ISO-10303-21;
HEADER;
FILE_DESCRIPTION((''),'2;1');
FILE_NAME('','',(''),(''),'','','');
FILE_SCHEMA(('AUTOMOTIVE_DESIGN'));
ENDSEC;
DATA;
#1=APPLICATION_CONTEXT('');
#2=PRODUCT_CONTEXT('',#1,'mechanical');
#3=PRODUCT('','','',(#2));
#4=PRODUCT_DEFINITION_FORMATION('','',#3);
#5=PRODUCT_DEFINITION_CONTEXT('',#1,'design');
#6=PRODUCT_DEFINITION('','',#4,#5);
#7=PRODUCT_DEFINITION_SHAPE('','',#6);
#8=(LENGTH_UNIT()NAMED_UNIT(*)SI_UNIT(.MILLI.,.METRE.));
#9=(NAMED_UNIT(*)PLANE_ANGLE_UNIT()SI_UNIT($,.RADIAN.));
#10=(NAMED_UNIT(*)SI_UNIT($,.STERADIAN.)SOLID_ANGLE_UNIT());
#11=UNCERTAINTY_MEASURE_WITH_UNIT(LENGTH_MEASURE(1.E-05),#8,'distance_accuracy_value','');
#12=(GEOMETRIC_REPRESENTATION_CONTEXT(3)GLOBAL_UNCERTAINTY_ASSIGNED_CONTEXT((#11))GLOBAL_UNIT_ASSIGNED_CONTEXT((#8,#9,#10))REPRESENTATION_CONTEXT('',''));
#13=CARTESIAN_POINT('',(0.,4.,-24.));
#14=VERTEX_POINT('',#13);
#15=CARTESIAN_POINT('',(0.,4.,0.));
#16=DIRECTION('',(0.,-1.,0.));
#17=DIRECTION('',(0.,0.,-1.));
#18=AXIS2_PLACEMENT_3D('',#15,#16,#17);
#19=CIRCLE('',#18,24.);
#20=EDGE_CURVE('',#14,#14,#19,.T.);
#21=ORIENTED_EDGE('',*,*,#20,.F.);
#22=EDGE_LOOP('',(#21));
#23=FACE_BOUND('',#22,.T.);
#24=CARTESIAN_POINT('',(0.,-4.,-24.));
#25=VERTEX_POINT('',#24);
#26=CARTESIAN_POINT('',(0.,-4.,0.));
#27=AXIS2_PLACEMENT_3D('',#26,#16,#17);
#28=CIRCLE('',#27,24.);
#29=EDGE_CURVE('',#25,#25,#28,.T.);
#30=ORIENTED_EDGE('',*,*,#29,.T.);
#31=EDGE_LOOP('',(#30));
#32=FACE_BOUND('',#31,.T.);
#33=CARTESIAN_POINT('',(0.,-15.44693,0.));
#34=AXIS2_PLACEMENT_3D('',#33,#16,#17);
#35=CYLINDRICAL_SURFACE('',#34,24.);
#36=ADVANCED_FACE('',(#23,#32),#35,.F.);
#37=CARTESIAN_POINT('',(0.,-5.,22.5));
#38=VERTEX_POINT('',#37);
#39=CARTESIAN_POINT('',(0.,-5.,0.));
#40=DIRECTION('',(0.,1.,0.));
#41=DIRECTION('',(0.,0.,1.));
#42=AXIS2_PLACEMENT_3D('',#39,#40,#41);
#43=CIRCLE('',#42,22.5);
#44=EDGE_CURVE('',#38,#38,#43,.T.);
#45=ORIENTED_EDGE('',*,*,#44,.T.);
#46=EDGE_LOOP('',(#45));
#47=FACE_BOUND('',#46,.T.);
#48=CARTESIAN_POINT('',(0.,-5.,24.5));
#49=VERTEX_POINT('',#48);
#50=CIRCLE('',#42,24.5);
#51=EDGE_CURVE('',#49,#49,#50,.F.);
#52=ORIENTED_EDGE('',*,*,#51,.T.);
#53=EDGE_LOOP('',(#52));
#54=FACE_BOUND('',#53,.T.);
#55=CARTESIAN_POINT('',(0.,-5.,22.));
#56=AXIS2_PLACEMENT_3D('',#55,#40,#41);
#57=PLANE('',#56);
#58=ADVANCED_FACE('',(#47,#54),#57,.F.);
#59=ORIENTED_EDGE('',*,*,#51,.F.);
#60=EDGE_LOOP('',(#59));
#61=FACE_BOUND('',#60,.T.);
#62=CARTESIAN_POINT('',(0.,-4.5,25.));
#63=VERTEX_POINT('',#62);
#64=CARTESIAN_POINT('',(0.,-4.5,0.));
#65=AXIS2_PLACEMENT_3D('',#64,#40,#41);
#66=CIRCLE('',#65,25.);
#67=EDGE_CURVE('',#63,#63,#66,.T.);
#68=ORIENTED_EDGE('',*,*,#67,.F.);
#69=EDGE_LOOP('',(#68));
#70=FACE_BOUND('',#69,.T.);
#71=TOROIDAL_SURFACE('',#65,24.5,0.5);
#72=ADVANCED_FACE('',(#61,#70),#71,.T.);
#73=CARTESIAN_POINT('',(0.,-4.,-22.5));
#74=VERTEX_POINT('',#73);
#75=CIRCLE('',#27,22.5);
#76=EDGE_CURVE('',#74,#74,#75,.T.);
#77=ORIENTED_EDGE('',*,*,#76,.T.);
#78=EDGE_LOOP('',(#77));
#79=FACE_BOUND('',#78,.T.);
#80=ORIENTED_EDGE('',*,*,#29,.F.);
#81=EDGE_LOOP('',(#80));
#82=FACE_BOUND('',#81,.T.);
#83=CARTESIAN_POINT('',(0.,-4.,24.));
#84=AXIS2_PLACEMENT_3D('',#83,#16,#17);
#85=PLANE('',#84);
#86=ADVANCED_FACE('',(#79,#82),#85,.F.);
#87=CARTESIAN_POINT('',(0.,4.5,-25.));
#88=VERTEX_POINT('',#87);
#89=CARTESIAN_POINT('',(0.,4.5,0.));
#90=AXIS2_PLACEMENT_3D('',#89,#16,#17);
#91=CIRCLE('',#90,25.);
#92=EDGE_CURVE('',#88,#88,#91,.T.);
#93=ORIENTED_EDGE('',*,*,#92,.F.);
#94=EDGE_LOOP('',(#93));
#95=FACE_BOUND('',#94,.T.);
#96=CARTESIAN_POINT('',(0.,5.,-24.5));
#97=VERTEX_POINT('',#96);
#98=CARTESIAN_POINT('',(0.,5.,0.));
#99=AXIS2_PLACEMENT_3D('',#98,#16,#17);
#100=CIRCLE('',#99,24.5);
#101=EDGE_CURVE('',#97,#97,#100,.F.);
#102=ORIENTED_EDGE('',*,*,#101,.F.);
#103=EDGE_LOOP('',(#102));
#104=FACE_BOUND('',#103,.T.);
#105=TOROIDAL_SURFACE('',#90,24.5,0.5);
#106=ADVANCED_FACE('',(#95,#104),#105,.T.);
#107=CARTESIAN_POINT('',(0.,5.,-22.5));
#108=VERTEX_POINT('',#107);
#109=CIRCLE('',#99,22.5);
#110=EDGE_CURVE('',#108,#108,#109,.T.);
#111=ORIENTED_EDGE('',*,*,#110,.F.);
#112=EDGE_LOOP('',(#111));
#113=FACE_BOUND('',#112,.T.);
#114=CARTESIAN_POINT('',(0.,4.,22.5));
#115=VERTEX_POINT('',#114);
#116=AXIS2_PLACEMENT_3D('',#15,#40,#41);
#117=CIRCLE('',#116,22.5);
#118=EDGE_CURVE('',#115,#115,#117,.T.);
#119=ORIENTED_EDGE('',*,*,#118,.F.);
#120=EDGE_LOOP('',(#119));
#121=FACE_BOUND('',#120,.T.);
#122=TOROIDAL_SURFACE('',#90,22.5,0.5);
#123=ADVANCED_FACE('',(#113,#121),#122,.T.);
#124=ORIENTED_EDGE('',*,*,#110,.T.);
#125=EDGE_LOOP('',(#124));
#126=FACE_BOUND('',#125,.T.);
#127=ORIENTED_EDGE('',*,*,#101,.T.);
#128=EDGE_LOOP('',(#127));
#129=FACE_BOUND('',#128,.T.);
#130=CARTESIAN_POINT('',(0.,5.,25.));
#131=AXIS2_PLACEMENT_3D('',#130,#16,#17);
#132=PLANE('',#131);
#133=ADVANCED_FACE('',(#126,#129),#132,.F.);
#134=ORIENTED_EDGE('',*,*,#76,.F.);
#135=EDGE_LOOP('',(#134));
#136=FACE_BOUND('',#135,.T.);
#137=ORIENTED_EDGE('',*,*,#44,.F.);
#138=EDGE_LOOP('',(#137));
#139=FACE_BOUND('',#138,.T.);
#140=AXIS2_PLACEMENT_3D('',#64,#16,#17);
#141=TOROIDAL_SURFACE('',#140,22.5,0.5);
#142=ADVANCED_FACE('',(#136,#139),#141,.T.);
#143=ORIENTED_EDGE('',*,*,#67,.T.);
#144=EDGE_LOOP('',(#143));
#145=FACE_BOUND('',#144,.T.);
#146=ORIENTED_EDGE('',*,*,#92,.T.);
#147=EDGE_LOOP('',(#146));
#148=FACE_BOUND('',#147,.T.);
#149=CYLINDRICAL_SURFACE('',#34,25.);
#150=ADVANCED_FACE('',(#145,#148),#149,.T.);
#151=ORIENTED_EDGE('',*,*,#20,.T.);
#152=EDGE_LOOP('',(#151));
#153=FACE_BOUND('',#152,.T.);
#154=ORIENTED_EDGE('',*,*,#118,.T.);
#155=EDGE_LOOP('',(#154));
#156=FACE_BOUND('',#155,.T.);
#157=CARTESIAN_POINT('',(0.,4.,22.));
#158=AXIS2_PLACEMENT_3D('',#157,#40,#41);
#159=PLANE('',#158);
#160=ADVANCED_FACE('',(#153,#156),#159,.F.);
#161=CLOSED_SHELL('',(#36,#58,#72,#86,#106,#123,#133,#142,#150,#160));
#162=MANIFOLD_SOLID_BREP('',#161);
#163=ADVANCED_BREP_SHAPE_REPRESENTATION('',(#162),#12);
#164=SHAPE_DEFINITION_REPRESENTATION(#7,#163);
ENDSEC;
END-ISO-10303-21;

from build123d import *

# Parameters (mm, degrees)
FILLET1_R = 0.5
FILLET2_R = 0.5
FILLET3_R = 0.5


with BuildPart() as part:
    # Sketch1 → Revolve1 (revolve)
    with BuildSketch(Plane.YZ, mode=Mode.PRIVATE) as revolve1_sk:
        Polygon((-5, 22), (-5, 25), (5, 25), (5, 22), (4, 22), (4, 24), (-4, 24), (-4, 22), align=None)
    revolve(revolve1_sk.sketch.rotate(Axis((0, -15.446930484, 0), (0, 1, 0)), 180), axis=Axis((0, -15.446930484, 0), (0, 1, 0)))

    # Fillet1
    fillet1_edges = [part.edges().sort_by_distance(p)[0] for p in [
        (0, 5, 25),
        (0, -5, 25),
    ]]
    fillet(fillet1_edges, radius=FILLET1_R)

    # Fillet2
    fillet2_edges = [part.edges().sort_by_distance(p)[0] for p in [
        (0, 4, 22),
        (0, 5, 22),
    ]]
    fillet(fillet2_edges, radius=FILLET2_R - 0.0001)  # a hair under: the kernel refuses the full size

    # Fillet3
    fillet3_edges = [part.edges().sort_by_distance(p)[0] for p in [
        (0, -5, 22),
        (0, -4, 22),
    ]]
    fillet(fillet3_edges, radius=FILLET3_R - 0.0001)  # a hair under: the kernel refuses the full size


solid = part.part
